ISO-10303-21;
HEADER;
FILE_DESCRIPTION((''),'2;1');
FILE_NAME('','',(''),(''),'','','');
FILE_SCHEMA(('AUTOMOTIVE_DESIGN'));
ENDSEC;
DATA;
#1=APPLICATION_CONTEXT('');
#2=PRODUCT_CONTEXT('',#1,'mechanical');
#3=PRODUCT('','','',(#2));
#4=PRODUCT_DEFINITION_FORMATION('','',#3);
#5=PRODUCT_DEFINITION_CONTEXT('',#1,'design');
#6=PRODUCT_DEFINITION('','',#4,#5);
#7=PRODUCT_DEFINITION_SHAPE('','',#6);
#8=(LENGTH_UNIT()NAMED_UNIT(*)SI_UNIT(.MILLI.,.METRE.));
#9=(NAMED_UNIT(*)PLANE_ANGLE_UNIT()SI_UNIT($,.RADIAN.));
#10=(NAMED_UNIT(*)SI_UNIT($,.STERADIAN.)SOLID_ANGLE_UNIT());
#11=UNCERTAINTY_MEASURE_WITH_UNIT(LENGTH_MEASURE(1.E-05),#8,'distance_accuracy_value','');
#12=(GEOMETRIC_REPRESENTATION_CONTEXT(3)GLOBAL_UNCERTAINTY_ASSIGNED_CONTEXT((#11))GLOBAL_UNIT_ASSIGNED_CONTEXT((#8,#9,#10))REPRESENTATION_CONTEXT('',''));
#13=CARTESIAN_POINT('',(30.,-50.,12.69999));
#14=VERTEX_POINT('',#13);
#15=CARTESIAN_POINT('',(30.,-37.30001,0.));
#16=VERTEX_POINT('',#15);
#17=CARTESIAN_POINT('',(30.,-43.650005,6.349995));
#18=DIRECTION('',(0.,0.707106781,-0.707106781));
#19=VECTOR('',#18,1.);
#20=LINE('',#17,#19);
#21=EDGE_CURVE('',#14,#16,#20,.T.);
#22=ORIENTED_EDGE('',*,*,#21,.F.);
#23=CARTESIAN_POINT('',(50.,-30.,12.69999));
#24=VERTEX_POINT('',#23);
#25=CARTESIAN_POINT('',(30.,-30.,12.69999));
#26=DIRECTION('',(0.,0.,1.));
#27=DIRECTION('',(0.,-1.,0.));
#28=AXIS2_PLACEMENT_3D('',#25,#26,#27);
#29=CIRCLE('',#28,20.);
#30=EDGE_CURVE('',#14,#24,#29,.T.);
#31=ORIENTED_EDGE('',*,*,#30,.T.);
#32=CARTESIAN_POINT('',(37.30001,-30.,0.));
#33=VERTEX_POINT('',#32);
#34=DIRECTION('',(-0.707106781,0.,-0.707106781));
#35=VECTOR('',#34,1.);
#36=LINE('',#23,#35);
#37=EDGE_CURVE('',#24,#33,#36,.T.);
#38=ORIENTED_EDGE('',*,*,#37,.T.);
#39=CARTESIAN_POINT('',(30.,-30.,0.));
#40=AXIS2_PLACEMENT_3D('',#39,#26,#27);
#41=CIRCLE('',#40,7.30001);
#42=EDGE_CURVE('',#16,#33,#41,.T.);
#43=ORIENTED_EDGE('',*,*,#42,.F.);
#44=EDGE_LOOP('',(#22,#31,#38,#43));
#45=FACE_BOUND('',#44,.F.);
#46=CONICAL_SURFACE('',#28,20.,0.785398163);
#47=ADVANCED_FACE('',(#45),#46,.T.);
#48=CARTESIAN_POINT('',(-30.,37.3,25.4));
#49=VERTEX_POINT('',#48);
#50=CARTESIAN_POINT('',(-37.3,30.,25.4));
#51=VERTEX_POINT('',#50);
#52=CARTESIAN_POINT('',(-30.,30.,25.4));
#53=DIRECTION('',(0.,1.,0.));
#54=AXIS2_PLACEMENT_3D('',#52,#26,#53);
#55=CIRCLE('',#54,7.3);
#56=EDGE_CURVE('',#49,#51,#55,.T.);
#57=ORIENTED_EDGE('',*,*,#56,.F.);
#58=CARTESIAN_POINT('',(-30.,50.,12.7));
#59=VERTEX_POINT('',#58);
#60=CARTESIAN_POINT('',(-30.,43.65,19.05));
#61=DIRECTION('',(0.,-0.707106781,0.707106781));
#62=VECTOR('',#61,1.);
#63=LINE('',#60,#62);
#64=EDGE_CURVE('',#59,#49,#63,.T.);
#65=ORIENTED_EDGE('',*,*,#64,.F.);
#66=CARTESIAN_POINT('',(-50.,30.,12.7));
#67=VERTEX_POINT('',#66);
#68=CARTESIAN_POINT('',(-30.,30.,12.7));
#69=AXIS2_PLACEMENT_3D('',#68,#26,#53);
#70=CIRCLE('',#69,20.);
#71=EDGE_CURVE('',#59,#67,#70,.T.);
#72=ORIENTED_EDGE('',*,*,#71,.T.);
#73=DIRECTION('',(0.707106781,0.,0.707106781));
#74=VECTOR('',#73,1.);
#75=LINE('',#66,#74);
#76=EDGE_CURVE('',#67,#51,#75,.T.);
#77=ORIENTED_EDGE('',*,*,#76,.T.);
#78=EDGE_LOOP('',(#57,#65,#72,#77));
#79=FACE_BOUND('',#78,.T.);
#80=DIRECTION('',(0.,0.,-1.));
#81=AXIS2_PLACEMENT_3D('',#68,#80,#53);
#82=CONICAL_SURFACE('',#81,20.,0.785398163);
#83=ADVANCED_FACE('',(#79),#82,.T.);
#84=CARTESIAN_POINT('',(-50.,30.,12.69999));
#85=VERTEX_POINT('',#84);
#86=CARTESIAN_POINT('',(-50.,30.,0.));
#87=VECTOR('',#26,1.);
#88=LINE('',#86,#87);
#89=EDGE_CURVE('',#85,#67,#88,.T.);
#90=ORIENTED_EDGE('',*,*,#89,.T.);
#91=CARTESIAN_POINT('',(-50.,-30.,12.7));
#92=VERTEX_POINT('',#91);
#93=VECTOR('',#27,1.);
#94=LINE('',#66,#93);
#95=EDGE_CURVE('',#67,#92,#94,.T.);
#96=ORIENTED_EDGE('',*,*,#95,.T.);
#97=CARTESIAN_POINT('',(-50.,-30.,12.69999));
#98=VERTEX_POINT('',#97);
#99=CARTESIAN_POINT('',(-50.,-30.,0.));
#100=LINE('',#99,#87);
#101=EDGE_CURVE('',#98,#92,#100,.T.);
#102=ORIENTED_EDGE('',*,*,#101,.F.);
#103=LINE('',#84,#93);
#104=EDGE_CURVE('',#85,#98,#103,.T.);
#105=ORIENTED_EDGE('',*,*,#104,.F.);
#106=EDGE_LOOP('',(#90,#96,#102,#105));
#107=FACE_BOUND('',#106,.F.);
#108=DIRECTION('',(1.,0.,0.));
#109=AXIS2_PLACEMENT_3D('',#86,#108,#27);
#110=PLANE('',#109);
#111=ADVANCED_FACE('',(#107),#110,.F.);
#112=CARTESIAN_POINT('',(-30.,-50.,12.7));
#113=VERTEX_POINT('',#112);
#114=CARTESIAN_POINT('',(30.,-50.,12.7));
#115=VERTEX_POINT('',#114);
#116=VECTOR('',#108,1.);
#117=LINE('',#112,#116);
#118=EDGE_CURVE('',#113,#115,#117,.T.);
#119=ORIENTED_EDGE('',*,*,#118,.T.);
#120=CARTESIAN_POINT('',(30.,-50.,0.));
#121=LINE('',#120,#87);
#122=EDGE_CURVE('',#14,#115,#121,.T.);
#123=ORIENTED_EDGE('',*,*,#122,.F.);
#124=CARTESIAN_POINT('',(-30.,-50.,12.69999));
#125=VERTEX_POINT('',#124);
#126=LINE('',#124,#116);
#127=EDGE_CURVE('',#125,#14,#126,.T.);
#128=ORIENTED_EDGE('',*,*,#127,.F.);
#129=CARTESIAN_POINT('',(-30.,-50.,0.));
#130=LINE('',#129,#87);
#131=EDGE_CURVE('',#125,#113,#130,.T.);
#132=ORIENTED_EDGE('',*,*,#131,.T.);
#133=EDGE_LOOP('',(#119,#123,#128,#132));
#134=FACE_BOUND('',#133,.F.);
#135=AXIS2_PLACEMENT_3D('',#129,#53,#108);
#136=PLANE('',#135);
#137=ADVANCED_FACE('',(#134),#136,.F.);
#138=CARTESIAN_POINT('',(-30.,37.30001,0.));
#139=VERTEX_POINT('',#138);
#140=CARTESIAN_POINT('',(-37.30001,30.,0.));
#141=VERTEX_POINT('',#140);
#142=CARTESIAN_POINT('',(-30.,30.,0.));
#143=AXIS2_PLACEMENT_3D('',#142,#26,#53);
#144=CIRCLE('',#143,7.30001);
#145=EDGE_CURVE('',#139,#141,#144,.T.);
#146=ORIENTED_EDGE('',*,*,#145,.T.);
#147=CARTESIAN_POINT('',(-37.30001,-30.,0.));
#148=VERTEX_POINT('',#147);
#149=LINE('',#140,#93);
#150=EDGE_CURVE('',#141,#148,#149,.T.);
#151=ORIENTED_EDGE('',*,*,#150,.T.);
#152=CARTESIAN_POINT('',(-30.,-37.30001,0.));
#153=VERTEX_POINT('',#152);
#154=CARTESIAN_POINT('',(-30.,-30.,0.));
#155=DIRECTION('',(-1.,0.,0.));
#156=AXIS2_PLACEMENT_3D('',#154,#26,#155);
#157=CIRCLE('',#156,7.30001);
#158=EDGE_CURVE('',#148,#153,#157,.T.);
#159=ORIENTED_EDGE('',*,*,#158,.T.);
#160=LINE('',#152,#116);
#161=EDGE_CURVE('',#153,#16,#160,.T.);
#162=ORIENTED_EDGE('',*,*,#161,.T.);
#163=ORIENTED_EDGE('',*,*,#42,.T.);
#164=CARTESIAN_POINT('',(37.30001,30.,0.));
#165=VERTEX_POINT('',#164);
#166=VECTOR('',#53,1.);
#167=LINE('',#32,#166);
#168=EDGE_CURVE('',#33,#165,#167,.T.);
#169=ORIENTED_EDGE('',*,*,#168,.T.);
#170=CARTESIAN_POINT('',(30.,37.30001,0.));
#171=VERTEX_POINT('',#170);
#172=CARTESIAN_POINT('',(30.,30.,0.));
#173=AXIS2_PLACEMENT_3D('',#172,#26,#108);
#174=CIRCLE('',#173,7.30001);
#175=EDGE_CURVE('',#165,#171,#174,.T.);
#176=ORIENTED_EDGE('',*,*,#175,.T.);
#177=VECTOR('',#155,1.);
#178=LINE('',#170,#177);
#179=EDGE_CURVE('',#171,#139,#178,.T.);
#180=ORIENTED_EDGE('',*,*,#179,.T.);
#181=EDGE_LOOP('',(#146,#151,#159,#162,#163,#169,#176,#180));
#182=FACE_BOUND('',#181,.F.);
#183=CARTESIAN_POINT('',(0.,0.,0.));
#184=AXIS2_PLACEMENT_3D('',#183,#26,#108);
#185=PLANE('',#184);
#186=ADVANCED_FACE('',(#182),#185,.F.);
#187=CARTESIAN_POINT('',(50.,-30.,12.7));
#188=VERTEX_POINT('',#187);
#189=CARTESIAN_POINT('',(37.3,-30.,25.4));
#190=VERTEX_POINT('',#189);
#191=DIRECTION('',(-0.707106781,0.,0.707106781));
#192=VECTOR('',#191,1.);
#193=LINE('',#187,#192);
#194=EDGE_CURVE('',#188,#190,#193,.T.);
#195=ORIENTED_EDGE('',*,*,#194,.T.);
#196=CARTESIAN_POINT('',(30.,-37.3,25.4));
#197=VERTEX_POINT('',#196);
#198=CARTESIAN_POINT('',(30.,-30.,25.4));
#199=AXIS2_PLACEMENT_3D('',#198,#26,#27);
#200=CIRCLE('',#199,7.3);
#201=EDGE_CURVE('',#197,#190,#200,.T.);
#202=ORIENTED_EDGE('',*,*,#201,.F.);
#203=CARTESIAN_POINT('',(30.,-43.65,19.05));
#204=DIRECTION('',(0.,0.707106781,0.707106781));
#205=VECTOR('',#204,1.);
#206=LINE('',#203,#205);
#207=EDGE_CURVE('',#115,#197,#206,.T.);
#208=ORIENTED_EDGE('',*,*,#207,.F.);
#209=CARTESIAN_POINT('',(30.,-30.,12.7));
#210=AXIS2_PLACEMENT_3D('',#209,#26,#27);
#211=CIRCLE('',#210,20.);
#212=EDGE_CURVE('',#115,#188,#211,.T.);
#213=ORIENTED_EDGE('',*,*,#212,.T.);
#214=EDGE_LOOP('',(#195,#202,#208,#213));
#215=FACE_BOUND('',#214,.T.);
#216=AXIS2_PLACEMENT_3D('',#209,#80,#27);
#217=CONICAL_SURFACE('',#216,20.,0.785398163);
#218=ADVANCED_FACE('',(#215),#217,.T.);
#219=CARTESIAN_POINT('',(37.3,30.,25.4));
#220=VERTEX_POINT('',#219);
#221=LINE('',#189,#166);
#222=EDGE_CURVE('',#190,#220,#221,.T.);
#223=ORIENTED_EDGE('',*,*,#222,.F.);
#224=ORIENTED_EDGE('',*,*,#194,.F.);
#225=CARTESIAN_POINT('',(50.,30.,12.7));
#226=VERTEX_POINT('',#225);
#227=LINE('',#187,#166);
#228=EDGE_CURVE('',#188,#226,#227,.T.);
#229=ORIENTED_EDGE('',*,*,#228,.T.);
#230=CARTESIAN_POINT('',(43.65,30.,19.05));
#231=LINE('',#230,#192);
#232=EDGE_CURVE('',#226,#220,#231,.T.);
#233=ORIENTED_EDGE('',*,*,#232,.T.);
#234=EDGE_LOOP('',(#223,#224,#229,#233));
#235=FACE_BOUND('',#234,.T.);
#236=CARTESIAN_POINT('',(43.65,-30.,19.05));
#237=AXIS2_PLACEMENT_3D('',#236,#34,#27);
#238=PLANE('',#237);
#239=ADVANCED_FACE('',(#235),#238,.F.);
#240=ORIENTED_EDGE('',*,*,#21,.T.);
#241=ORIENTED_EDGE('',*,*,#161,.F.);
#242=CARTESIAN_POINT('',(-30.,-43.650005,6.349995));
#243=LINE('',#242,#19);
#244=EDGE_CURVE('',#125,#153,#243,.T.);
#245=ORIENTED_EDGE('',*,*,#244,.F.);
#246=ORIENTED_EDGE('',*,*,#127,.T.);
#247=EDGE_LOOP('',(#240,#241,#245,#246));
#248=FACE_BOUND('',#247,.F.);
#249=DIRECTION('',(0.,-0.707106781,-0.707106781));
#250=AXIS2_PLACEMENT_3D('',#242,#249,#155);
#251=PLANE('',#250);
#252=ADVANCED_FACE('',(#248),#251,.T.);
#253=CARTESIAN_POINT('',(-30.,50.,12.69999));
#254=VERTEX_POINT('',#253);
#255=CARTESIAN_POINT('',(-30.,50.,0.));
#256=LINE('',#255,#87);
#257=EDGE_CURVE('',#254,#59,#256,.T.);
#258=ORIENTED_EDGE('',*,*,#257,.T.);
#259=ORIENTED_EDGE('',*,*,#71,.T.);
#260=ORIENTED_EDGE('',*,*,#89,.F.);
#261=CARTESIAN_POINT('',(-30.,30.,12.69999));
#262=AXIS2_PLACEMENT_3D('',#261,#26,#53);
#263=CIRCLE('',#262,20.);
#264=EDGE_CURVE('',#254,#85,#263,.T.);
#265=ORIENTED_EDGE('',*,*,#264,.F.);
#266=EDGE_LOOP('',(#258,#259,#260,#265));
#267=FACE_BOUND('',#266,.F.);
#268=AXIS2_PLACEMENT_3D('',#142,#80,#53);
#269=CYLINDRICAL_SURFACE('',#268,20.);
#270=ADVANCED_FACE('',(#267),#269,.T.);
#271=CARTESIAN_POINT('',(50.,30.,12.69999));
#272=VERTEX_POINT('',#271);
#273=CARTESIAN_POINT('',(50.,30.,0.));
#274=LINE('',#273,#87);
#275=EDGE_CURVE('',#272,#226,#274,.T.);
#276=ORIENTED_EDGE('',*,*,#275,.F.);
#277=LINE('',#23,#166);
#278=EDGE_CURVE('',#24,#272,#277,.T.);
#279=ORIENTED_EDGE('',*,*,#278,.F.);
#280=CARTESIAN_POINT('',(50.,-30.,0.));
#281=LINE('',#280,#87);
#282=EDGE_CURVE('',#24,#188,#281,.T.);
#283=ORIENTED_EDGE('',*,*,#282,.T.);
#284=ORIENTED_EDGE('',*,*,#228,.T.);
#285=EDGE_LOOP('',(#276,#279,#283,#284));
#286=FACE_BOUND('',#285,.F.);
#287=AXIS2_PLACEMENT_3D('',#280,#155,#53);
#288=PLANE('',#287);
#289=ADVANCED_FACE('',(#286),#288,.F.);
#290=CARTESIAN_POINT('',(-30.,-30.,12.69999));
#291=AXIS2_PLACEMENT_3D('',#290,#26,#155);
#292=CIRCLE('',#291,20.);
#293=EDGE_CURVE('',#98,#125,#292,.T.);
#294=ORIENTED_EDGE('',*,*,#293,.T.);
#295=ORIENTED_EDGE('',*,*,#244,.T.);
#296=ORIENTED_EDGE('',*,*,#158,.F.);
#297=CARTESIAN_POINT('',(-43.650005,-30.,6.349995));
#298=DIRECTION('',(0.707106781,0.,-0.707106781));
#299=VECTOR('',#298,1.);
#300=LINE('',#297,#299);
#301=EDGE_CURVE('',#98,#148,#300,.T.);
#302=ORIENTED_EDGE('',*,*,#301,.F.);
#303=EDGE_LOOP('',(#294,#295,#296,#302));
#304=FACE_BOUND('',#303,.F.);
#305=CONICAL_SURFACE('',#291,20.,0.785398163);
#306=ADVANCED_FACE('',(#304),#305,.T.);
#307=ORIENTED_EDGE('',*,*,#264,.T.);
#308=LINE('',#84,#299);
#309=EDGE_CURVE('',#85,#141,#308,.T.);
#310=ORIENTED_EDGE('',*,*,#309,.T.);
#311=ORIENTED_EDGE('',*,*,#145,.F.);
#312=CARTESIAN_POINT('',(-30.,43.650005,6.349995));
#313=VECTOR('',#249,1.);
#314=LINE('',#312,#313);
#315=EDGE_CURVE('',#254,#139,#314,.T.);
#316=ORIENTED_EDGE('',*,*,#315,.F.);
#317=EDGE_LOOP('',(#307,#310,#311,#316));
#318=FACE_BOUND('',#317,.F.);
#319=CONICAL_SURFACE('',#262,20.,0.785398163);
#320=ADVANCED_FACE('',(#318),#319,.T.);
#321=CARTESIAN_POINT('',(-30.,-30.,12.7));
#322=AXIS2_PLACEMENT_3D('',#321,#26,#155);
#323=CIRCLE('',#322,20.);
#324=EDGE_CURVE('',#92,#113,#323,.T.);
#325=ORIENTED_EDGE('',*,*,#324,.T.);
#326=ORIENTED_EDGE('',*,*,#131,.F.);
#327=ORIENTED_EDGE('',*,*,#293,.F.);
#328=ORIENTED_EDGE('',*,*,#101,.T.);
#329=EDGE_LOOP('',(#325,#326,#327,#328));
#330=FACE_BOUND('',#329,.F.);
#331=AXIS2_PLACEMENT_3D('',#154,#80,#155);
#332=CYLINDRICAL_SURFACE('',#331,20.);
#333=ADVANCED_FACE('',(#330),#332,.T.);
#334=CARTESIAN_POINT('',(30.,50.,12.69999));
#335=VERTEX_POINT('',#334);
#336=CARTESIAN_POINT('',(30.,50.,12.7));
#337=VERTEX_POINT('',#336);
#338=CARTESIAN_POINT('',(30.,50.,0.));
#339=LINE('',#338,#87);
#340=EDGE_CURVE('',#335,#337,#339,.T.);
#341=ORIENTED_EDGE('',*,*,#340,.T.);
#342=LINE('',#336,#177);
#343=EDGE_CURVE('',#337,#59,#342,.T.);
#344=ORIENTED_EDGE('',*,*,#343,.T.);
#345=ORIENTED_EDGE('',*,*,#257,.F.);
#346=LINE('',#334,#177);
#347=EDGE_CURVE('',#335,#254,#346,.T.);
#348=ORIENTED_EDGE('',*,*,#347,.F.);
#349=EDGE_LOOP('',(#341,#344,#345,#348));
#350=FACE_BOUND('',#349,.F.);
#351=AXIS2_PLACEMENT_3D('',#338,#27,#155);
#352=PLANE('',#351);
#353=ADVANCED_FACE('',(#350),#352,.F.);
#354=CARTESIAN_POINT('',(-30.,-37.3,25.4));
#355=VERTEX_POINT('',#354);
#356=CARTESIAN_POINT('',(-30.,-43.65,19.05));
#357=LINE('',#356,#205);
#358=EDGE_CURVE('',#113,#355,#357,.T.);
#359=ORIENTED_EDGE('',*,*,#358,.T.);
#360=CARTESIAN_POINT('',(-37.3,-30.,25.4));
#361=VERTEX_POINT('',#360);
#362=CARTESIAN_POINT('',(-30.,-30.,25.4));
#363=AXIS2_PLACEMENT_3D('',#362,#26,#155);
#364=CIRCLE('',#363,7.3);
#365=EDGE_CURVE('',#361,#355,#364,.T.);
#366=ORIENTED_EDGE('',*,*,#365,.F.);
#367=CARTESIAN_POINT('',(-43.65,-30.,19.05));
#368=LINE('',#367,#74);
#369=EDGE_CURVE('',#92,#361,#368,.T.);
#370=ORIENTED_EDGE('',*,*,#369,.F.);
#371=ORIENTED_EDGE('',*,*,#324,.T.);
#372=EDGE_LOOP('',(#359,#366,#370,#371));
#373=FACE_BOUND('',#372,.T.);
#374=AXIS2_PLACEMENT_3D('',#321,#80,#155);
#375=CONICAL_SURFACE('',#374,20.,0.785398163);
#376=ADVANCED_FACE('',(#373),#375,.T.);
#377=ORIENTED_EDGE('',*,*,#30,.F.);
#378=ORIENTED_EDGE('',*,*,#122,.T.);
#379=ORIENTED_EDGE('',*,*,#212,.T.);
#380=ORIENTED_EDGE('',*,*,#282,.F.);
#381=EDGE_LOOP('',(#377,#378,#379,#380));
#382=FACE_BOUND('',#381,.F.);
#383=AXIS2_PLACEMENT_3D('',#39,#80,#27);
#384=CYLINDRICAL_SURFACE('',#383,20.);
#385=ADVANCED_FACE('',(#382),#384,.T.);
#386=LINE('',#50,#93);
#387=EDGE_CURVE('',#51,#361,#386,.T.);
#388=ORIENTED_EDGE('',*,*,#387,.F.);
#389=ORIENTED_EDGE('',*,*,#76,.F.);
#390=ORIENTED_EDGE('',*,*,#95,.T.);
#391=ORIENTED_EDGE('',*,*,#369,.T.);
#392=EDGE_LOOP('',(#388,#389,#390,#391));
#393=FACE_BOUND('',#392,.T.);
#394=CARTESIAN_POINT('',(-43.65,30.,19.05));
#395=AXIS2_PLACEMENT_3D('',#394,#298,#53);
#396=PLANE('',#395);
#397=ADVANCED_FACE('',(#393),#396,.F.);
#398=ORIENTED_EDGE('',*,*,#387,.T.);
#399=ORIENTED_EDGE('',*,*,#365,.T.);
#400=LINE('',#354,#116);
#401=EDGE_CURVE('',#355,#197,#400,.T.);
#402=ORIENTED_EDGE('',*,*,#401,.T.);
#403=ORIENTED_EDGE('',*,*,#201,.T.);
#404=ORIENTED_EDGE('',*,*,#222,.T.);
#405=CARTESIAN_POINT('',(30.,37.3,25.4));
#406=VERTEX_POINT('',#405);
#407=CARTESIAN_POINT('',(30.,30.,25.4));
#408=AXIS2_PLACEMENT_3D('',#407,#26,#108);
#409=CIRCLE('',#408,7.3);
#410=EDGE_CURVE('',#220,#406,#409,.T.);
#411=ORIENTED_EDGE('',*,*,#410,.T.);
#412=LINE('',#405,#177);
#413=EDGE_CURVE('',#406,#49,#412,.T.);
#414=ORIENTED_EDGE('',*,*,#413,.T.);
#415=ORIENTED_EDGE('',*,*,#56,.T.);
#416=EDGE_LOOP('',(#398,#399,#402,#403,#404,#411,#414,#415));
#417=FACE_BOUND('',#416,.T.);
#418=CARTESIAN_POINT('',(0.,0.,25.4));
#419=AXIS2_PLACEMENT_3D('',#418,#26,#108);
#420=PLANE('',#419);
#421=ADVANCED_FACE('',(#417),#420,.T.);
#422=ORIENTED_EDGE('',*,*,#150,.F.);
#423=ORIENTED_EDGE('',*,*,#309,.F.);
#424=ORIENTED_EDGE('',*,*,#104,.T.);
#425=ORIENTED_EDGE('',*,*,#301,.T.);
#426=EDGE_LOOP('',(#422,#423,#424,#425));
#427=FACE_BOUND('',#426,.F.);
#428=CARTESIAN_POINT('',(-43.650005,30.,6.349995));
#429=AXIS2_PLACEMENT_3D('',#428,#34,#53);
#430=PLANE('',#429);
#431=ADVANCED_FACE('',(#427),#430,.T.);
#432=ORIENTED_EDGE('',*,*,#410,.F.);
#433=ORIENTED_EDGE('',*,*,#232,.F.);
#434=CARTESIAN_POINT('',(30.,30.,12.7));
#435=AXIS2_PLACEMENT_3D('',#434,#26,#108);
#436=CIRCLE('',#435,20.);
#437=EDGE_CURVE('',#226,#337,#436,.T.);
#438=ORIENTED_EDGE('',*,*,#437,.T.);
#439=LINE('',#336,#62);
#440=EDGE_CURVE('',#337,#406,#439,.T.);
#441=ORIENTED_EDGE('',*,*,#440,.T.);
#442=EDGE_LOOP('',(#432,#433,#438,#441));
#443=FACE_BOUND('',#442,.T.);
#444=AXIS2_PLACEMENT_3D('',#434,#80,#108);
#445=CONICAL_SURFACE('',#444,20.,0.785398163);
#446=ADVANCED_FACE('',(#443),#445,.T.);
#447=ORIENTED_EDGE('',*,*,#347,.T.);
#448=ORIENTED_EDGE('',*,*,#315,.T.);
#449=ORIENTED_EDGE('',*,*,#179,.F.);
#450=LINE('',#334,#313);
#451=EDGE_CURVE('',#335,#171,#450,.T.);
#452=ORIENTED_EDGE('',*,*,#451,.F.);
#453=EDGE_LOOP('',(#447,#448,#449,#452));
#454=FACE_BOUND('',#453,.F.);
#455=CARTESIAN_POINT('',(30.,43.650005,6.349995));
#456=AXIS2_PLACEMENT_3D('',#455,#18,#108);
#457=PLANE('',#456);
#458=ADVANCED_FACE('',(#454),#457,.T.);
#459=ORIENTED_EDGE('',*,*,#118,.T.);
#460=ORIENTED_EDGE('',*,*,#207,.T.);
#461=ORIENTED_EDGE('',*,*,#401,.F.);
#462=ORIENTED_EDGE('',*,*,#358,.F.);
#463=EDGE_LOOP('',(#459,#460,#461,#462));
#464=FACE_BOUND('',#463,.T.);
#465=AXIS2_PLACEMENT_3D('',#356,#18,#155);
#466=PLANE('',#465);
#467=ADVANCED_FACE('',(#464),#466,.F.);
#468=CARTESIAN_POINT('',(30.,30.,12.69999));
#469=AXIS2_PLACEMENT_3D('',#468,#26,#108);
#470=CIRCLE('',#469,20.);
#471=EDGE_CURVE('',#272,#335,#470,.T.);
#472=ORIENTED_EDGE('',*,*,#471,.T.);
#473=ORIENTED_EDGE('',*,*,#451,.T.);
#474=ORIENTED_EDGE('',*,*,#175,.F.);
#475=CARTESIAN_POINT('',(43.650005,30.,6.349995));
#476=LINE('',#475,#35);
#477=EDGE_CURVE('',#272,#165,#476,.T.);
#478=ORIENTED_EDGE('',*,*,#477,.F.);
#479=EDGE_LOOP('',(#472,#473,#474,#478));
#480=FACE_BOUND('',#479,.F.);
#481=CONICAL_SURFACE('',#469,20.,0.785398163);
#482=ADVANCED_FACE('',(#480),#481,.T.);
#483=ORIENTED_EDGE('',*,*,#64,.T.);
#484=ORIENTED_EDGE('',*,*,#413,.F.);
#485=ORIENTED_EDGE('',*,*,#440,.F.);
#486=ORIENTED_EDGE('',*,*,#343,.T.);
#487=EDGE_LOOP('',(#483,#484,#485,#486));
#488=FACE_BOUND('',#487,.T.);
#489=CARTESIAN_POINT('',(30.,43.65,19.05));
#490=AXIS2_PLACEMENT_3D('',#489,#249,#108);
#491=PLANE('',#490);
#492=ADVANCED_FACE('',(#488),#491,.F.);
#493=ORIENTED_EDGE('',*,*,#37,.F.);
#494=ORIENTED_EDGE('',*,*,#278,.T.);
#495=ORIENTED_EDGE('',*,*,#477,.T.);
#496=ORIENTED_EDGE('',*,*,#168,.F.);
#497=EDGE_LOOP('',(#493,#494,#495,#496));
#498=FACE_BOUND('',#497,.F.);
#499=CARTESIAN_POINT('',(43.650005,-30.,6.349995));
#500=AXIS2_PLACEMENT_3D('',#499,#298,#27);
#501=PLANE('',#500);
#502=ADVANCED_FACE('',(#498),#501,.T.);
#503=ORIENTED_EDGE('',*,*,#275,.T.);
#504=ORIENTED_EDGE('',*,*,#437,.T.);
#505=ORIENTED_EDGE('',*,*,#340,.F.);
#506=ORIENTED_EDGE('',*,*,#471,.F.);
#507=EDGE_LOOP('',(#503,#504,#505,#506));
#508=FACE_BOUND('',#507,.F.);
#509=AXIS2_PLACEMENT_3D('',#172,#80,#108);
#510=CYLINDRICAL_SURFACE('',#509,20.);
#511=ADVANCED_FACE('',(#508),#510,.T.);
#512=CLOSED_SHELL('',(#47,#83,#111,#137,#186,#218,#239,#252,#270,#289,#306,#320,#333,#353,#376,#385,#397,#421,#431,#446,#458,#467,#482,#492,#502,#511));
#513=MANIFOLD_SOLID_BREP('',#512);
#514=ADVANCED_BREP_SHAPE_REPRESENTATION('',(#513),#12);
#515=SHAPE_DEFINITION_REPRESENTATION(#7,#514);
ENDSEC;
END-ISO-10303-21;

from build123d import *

# Parameters (mm, degrees)
F1_DEPTH = 25.4
F2_SIZE  = 12.7
F3_SIZE  = 12.69999


# Not quite as in the source:
# - a fillet or chamfer is up to 0.001 mm smaller than in the source, because OpenCascade refuses the exact size


with BuildPart() as f1:
    # F0 (on Top) → F1 (new body)
    with BuildSketch(Plane.XY):
        with BuildLine():
            Line((-30, -50), (30, -50))
            ThreePointArc((30, -50), (44.1421356237, -44.1421356237), (50, -30))
            Line((50, -30), (50, 30))
            ThreePointArc((50, 30), (44.1421356237, 44.1421356237), (30, 50))
            Line((30, 50), (-30, 50))
            ThreePointArc((-30, 50), (-44.1421356237, 44.1421356237), (-50, 30))
            Line((-50, 30), (-50, -30))
            ThreePointArc((-50, -30), (-44.1421356237, -44.1421356237), (-30, -50))
        make_face()
    extrude(amount=F1_DEPTH)

    # F2
    f2_edges = [f1.edges().sort_by_distance(p)[0] for p in [
        (0, -50, 25.4),
        (44.142136, -44.142136, 25.4),
        (50, 0, 25.4),
        (44.142136, 44.142136, 25.4),
        (0, 50, 25.4),
        (-44.142136, 44.142136, 25.4),
        (-50, 0, 25.4),
        (-44.142136, -44.142136, 25.4),
    ]]
    chamfer(f2_edges, length=F2_SIZE)

    # F3 (size 12.7 in the source; OpenCascade refuses exactly that, so slightly less here)
    f3_edges = [f1.edges().sort_by_distance(p)[0] for p in [
        (0, -50, 0),
        (44.142136, -44.142136, 0),
        (50, 0, 0),
        (44.142136, 44.142136, 0),
        (0, 50, 0),
        (-44.142136, 44.142136, 0),
        (-50, 0, 0),
        (-44.142136, -44.142136, 0),
    ]]
    chamfer(f3_edges, length=F3_SIZE)


solid = f1.part
